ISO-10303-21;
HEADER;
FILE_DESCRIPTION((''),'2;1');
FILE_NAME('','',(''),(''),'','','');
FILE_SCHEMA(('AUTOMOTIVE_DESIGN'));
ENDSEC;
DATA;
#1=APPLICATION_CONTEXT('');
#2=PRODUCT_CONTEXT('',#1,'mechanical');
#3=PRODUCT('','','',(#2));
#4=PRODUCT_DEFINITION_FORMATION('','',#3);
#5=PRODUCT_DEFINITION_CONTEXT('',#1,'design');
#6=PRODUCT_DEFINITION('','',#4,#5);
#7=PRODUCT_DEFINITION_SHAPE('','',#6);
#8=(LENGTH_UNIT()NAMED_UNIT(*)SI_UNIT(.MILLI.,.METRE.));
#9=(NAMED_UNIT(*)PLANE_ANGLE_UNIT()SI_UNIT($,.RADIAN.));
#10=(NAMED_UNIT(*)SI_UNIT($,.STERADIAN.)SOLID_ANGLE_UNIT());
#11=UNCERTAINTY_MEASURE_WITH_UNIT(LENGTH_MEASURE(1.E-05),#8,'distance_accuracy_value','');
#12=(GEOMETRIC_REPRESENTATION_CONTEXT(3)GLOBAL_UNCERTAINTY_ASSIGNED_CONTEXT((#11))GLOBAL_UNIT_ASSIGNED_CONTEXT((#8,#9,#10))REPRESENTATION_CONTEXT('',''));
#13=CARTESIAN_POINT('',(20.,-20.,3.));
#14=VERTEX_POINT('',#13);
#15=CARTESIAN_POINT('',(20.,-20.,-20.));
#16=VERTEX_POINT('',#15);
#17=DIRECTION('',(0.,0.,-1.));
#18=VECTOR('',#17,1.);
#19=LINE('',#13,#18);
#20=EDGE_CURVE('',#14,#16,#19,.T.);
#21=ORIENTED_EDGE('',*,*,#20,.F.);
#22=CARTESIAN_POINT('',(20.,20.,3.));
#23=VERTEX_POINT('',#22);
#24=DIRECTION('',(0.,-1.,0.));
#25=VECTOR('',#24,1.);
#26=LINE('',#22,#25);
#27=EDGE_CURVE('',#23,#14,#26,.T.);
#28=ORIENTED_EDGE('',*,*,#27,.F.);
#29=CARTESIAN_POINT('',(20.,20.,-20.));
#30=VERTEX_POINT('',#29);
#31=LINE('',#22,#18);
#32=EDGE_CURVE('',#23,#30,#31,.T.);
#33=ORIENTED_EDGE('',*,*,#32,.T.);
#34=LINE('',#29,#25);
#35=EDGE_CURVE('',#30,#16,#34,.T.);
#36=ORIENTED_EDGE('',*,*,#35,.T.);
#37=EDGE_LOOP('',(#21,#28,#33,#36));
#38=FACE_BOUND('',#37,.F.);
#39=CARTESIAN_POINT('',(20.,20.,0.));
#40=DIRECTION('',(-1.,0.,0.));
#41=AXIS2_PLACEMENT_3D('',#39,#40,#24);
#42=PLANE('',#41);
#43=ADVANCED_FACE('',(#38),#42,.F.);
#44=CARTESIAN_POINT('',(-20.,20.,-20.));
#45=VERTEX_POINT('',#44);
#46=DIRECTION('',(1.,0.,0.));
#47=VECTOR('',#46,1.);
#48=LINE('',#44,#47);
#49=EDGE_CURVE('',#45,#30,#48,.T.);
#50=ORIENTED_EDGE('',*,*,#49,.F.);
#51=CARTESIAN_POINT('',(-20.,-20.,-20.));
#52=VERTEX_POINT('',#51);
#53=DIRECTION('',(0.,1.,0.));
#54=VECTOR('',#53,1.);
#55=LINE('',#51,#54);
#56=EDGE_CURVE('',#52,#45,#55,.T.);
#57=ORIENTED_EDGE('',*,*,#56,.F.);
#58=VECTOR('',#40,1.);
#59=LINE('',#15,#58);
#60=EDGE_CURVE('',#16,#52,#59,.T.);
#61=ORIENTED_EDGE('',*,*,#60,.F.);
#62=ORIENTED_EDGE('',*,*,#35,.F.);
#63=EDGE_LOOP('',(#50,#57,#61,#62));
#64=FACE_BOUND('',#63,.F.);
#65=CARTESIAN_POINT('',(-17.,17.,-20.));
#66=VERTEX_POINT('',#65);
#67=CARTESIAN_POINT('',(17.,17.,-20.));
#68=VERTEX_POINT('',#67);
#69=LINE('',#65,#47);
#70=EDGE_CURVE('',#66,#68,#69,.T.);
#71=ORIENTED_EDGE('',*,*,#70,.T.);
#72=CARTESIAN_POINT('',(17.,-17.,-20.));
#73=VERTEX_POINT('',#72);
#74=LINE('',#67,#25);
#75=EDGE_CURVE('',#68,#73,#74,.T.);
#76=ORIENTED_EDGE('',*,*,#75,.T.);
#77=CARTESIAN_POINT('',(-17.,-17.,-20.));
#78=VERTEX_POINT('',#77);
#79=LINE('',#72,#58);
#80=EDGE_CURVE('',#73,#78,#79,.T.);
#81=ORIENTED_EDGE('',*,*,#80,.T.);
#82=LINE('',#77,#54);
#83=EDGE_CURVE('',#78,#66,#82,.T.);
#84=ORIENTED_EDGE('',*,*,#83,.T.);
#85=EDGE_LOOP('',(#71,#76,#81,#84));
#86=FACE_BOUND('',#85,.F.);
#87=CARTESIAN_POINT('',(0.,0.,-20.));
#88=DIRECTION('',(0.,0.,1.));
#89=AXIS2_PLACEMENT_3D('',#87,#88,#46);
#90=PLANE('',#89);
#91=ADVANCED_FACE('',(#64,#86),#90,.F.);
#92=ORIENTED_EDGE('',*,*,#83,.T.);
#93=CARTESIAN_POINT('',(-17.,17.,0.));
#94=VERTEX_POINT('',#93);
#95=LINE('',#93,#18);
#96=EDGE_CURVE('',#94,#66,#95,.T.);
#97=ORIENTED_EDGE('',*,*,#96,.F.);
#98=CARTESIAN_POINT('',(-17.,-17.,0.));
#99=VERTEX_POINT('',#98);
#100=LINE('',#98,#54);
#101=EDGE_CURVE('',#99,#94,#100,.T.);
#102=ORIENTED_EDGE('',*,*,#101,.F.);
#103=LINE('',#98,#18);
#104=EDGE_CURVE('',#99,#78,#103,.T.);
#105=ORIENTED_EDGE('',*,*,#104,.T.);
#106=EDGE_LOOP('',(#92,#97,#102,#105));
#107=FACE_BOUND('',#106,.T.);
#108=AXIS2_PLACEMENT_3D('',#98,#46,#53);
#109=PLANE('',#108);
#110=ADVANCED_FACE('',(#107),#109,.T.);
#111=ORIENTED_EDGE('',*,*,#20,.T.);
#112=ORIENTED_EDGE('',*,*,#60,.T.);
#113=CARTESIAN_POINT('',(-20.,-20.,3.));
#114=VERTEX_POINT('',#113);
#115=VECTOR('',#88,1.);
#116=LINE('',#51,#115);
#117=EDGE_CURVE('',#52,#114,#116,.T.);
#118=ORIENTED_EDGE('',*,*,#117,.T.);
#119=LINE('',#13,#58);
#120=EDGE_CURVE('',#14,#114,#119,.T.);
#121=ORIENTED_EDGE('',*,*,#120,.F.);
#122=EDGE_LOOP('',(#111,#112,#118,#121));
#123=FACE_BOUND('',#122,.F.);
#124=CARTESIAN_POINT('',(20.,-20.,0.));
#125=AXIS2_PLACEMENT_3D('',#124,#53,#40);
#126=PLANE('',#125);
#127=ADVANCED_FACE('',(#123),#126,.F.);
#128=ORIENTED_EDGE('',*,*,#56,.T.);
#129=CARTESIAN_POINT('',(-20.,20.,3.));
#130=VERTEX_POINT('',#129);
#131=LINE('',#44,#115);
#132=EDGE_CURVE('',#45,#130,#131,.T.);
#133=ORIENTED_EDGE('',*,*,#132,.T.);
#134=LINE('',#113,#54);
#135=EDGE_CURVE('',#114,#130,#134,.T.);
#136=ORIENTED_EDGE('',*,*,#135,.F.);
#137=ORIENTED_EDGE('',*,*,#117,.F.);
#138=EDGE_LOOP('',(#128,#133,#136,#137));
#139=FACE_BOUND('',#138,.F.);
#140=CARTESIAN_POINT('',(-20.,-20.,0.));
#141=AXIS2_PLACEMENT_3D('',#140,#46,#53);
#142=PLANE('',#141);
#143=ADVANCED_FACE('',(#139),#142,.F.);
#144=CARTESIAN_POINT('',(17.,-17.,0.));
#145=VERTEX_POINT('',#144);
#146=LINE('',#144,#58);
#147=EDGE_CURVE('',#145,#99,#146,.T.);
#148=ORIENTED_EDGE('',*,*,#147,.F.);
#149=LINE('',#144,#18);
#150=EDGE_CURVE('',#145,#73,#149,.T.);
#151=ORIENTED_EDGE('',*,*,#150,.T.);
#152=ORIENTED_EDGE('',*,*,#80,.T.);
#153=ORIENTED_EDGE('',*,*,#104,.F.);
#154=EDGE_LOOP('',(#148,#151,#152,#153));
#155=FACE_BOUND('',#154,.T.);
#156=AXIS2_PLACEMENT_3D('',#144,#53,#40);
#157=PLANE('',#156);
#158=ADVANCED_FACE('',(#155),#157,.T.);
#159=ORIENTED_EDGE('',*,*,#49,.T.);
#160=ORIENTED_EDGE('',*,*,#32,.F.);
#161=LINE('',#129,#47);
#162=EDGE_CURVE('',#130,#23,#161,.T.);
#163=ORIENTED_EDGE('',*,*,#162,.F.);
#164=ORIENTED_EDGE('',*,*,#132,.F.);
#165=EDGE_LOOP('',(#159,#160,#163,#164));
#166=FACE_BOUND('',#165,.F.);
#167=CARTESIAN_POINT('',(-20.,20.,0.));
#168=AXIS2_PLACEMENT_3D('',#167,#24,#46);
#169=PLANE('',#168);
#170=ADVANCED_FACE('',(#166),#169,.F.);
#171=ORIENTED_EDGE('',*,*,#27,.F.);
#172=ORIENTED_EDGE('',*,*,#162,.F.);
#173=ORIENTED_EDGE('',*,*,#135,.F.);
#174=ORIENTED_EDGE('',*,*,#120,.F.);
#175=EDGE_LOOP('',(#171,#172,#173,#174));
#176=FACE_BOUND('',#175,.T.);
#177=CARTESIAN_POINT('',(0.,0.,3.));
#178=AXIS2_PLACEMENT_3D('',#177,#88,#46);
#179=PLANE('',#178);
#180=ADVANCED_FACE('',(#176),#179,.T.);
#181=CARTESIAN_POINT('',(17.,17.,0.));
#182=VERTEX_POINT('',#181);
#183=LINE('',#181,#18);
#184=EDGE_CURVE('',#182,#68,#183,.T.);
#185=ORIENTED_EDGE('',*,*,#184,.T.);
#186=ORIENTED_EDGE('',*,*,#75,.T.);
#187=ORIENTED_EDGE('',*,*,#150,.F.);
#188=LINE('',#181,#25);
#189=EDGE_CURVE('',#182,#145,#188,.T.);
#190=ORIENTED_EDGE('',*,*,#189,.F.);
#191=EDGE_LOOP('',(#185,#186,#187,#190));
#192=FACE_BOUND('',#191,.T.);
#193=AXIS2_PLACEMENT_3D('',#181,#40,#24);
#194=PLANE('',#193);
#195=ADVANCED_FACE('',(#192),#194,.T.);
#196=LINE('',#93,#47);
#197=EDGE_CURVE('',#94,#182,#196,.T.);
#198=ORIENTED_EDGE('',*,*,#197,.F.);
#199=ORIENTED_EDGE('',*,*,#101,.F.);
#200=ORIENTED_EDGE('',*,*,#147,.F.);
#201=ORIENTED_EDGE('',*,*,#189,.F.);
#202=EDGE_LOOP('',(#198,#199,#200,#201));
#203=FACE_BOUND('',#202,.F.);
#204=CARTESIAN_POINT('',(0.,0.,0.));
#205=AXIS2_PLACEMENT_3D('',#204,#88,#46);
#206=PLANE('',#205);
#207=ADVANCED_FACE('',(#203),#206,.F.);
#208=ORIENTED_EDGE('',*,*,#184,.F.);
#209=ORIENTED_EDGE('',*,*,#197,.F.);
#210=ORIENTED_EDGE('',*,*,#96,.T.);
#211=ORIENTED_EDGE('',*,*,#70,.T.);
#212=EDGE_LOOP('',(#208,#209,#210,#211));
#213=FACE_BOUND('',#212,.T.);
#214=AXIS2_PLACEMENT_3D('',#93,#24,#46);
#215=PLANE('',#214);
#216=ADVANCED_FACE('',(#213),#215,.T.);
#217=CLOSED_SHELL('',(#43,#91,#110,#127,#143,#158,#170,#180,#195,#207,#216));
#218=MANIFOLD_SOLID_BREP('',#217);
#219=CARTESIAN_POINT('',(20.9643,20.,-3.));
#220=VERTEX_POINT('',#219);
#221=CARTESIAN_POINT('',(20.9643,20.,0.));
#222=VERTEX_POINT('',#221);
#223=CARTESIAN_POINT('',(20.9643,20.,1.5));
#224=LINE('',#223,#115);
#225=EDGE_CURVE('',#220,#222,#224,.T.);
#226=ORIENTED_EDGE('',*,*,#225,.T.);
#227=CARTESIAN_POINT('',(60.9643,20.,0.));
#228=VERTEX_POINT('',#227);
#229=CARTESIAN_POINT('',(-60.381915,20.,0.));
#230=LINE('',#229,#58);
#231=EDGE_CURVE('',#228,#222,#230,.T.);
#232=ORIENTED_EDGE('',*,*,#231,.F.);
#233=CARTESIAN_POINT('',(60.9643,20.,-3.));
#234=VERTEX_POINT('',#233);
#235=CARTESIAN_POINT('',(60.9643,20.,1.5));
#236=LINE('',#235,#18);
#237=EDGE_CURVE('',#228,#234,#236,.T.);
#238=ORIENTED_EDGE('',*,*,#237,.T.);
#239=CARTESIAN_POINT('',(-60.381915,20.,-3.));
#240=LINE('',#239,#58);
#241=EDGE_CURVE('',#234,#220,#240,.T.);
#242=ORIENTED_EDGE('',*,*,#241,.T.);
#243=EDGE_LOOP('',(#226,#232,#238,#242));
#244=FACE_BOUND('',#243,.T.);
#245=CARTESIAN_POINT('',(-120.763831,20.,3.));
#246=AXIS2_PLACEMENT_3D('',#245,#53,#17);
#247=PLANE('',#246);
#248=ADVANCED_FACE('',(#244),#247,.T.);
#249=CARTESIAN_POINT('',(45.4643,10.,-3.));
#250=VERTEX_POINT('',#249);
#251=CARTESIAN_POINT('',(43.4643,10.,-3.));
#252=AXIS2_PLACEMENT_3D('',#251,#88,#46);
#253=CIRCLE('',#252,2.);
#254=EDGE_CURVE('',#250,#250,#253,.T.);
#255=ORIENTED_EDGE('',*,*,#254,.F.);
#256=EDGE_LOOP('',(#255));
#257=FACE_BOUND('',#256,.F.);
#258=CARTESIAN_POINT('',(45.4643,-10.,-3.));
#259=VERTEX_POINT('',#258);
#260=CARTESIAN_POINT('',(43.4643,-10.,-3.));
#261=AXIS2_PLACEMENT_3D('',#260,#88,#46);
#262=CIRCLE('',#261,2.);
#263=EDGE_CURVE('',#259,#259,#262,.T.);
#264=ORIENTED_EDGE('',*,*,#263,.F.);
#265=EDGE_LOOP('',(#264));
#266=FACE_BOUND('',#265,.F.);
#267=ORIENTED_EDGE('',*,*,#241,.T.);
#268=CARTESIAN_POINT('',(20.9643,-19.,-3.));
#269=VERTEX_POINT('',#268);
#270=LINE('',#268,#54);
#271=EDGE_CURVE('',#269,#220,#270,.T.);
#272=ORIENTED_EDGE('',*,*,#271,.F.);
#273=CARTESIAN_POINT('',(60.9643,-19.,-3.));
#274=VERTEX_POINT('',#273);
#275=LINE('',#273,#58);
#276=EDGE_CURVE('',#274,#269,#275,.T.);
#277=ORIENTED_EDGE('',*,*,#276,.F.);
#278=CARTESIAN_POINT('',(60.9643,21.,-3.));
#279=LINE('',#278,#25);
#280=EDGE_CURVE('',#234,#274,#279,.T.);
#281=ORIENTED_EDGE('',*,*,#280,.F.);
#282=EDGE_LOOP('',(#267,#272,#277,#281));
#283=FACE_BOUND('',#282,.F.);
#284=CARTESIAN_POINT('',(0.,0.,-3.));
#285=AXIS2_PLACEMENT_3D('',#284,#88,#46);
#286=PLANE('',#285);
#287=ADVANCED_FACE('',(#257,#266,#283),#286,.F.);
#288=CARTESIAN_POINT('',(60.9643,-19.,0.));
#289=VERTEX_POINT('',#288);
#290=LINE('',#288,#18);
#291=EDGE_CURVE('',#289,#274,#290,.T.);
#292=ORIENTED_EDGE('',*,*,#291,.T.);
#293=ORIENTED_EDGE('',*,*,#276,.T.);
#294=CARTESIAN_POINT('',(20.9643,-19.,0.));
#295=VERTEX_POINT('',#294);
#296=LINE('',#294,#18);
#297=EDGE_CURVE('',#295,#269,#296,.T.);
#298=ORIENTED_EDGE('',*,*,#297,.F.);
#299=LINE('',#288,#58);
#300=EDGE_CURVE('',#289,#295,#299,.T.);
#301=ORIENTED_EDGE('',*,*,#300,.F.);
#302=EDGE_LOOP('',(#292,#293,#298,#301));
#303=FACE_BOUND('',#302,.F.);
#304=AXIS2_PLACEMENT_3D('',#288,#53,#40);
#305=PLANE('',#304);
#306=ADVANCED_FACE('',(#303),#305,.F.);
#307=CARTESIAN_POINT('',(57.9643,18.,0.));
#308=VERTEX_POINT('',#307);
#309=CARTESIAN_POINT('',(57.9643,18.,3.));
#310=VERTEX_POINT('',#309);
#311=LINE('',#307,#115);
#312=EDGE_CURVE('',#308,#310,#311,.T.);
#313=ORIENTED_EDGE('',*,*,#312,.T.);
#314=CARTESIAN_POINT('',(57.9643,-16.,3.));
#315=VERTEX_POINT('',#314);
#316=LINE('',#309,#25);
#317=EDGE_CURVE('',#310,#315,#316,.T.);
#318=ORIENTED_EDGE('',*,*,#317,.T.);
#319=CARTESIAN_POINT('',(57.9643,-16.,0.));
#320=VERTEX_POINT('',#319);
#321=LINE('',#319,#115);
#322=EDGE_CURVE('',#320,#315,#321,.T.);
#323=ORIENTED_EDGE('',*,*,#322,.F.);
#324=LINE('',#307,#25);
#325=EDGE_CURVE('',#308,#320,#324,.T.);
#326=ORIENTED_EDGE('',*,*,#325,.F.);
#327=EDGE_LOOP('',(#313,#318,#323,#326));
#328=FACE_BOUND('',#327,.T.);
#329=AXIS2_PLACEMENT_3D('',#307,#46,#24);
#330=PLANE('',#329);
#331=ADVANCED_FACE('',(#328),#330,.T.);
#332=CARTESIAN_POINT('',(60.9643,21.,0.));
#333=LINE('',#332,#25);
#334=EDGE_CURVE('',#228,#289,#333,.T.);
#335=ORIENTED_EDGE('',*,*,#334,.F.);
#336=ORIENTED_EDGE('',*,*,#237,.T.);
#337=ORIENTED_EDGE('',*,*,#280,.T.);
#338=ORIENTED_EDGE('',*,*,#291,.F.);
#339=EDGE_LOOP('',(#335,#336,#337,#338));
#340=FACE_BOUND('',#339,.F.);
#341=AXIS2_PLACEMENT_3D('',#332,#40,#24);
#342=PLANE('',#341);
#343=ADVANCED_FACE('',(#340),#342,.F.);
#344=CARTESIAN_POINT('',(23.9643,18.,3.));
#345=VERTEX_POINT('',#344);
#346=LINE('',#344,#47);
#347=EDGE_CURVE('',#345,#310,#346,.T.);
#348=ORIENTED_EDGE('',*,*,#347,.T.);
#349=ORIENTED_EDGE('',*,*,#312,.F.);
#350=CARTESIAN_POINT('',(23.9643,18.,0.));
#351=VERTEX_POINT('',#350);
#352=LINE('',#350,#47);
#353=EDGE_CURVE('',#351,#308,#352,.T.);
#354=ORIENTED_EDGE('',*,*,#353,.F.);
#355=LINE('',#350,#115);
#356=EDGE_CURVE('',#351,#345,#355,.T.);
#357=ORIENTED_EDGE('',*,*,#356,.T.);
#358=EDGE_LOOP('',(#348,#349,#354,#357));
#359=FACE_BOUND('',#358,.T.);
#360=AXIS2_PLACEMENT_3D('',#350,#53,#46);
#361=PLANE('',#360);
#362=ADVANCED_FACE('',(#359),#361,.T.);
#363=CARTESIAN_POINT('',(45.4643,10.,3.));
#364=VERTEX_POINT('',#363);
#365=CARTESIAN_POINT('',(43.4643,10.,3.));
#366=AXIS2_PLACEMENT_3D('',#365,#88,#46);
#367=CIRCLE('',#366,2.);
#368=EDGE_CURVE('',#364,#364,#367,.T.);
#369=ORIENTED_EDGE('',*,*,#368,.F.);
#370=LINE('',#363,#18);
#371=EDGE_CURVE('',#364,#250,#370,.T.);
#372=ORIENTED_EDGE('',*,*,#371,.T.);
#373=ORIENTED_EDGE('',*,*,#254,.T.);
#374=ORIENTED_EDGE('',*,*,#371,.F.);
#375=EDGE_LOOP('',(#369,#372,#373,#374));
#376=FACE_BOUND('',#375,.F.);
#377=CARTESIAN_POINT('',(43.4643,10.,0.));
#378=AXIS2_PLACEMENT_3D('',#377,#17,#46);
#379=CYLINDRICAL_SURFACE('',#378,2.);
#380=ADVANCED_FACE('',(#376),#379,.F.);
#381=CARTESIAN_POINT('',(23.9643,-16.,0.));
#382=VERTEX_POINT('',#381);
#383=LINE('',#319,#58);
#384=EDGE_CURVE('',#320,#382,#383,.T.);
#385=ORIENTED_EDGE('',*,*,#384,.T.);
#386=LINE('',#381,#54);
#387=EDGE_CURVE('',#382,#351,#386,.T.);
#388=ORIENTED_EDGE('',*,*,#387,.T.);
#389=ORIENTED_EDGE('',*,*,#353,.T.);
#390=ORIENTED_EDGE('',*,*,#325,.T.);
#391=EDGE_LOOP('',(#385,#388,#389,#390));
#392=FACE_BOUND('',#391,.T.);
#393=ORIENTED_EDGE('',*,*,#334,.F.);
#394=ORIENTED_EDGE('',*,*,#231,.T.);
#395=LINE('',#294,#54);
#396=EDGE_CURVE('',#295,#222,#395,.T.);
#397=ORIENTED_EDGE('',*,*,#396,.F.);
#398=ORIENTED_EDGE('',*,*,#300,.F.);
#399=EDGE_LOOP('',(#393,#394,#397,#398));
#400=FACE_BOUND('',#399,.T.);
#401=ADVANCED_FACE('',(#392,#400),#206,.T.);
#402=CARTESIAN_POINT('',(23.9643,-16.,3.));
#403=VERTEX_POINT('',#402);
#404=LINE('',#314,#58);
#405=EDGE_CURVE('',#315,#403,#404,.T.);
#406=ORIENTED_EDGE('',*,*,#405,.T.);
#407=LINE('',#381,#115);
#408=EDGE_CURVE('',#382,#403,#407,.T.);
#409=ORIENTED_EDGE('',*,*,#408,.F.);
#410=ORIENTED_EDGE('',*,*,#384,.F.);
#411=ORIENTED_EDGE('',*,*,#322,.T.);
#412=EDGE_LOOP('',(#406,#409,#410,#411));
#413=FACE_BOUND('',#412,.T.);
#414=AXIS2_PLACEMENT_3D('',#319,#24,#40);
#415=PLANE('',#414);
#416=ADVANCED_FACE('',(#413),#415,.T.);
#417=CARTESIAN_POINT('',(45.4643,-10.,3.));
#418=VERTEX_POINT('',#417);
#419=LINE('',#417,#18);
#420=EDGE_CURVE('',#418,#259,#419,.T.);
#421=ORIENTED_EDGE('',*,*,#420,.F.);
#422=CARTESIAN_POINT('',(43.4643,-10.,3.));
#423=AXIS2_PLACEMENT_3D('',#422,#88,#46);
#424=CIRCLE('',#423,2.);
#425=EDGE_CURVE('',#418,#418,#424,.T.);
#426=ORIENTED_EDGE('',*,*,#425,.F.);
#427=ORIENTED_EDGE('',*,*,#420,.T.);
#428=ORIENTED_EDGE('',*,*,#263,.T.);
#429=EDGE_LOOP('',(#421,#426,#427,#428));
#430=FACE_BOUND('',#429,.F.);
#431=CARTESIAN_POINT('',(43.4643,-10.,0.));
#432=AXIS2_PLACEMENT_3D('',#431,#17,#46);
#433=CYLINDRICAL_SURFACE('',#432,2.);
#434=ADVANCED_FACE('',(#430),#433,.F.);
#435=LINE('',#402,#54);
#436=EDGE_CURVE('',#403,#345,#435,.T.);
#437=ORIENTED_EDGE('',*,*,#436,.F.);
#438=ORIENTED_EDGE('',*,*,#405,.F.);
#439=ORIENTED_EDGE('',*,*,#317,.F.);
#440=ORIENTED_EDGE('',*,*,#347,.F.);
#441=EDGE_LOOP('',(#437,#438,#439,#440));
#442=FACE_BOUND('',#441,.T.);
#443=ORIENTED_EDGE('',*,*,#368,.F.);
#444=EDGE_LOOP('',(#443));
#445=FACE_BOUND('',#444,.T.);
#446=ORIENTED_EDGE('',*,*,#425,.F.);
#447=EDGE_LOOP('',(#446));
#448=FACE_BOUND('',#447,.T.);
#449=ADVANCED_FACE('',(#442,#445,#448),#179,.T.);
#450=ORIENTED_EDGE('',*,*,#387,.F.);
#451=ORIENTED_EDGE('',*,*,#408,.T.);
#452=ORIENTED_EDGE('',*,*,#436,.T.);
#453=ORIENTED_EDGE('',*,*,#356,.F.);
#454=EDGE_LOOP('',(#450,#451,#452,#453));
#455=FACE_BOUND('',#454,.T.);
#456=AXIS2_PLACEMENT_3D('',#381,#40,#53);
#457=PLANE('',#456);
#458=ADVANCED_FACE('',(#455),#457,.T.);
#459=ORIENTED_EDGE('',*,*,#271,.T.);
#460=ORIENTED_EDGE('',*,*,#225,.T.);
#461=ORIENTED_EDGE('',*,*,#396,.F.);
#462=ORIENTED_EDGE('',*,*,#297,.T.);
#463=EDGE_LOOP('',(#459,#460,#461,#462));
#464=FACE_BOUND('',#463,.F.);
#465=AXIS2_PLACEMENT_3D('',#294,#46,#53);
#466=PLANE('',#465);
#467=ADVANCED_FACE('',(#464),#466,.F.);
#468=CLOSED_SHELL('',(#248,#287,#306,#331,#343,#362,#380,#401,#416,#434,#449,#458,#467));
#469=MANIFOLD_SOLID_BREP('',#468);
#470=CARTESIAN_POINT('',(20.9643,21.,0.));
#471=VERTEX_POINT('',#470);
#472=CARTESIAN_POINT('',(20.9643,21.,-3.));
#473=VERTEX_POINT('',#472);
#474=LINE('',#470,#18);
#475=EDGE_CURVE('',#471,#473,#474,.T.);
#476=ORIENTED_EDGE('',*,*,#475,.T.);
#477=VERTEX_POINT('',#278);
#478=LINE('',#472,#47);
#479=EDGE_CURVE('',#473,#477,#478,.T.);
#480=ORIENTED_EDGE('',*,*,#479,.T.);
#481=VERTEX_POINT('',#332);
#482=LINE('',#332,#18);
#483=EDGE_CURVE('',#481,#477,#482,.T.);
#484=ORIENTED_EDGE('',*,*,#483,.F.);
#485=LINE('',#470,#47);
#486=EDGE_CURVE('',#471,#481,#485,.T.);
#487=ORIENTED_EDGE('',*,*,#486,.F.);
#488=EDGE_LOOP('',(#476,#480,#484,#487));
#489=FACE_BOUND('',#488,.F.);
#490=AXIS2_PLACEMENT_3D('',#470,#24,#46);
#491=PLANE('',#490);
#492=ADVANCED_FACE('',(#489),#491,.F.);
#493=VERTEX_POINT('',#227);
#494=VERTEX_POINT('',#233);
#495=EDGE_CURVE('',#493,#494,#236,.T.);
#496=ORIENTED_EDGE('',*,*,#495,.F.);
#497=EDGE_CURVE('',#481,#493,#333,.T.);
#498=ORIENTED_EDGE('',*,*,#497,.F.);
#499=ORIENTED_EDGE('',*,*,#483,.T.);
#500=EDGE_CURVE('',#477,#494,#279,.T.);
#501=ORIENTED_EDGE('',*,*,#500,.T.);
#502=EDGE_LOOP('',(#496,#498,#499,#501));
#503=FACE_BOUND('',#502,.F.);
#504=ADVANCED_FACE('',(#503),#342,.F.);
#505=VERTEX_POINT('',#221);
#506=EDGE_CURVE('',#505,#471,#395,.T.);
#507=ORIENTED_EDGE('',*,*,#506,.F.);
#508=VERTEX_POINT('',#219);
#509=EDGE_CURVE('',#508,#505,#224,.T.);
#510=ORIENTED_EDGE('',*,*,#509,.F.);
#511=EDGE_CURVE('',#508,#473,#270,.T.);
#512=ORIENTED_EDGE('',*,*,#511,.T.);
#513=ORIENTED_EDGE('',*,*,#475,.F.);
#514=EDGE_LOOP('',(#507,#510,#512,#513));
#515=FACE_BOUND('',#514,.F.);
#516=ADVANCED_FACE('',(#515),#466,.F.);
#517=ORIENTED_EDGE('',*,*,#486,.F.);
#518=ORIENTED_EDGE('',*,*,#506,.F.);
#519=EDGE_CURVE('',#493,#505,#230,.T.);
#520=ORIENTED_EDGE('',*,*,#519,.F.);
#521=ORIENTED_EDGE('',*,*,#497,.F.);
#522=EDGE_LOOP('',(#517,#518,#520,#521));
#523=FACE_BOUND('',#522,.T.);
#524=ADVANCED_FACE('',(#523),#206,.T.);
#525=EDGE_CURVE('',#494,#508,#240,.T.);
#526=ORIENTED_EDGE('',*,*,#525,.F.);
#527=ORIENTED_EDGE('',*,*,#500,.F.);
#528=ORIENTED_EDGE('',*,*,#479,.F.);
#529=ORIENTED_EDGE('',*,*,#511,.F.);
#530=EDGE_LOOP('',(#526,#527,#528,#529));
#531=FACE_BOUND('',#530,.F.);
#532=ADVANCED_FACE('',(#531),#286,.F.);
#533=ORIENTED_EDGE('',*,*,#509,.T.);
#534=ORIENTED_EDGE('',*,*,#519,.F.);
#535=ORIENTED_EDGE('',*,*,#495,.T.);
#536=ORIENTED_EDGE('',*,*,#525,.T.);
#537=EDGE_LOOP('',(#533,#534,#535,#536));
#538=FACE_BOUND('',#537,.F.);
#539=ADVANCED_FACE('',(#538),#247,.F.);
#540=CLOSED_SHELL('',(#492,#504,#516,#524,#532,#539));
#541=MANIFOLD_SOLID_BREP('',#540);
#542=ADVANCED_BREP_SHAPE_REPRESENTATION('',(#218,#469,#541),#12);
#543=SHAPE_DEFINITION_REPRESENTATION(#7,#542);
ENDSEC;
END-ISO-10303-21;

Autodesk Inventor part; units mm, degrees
ref_plane "YZ Plane" through (0, 0, 0) normal (1, 0, 0) x (0, 1, 0)
ref_plane "XZ Plane" through (0, 0, 0) normal (0, 1, 0) x (-1, 0, 0)
ref_plane "XY Plane" through (0, 0, 0) normal (0, 0, 1) x (1, 0, 0)
sketch "Sketch1" plane through (0, 0, 0) normal (0, 0, 1) x (1, 0, 0)
  line L0 (-20, 20) -> (20, 20)
  line L1 (20, 20) -> (20, -20)
  line L2 (20, -20) -> (-20, -20)
  line L3 (-20, -20) -> (-20, 20)
  line L4 (-20, 20) -> (20, -20) construction
  line L5 (20, 20) -> (-20, -20) construction
  line L6 (-17, 17) -> (17, 17)
  line L7 (17, 17) -> (17, -17)
  line L8 (17, -17) -> (-17, -17)
  line L9 (-17, -17) -> (-17, 17)
  line L10 (-17, 17) -> (17, -17) construction
  line L11 (17, 17) -> (-17, -17) construction
  line L12 (20.9643, 21) -> (60.9643, 21)
  line L13 (60.9643, 21) -> (60.9643, -19)
  line L14 (60.9643, -19) -> (20.9643, -19)
  line L15 (20.9643, -19) -> (20.9643, 21)
  line L16 (20.9643, 21) -> (60.9643, -19) construction
  line L17 (60.9643, 21) -> (20.9643, -19) construction
  line L18 (23.9643, 18) -> (57.9643, 18)
  line L19 (57.9643, 18) -> (57.9643, -16)
  line L20 (57.9643, -16) -> (23.9643, -16)
  line L21 (23.9643, -16) -> (23.9643, 18)
  line L22 (23.9643, 18) -> (57.9643, -16) construction
  line L23 (57.9643, 18) -> (23.9643, -16) construction
  line L24 (60.9643, 0) -> (43.4643, 0) construction
  line L25 (43.4643, 0) -> (43.4643, -10) construction
  line L26 (43.4643, 0) -> (43.4643, 10) construction
  circle A0 centre (43.4643, -10) radius 2
  circle A1 centre (43.4643, 10) radius 2
  point P0 (0, 0)
  point P1 (40.9643, 1)
  dimension "d0" = 40
  dimension "d1" = 40
  dimension "d2" = 34
  dimension "d3" = 34
  dimension "d4" = 40
  dimension "d5" = 40
  dimension "d6" = 34
  dimension "d7" = 34
  dimension "d20" = 17.5
  dimension "d21" = 10
  dimension "d22" = 10
  dimension "d23" = 4
  dimension "d24" = 4
extrude "Extrusion7" add sketch "Sketch1" along normal blind 3 contours L0 L1 L2 L3 | L6 L7 L8 L9
extrude "Extrusion8" add sketch "Sketch1" against normal blind 20 contours L0 L1 L2 L3
extrude "Extrusion9" add sketch "Sketch1" along normal blind 3 contours L18 L19 L20 L21
extrude "Extrusion10" add sketch "Sketch1" against normal blind 3 contours L12 L13 L14 L15 | L18 L19 L20 L21
sketch "Sketch2" plane through (20, -20, 3) normal (1, 0, 0) x (0, 0, -1)
  line L0 (23, 0) -> (0, 0)
  line L1 (0, 0) -> (0, 40)
  line L2 (0, 40) -> (23, 40)
  line L3 (23, 40) -> (23, 0)
  point P0 (3, 20)
split body "Split1" sketch "Sketch2" result two bodies curves L3 L0 L1 L2 first body at (34.2976, 20.5, -1)
properties part number "Camera_Display_Box"
